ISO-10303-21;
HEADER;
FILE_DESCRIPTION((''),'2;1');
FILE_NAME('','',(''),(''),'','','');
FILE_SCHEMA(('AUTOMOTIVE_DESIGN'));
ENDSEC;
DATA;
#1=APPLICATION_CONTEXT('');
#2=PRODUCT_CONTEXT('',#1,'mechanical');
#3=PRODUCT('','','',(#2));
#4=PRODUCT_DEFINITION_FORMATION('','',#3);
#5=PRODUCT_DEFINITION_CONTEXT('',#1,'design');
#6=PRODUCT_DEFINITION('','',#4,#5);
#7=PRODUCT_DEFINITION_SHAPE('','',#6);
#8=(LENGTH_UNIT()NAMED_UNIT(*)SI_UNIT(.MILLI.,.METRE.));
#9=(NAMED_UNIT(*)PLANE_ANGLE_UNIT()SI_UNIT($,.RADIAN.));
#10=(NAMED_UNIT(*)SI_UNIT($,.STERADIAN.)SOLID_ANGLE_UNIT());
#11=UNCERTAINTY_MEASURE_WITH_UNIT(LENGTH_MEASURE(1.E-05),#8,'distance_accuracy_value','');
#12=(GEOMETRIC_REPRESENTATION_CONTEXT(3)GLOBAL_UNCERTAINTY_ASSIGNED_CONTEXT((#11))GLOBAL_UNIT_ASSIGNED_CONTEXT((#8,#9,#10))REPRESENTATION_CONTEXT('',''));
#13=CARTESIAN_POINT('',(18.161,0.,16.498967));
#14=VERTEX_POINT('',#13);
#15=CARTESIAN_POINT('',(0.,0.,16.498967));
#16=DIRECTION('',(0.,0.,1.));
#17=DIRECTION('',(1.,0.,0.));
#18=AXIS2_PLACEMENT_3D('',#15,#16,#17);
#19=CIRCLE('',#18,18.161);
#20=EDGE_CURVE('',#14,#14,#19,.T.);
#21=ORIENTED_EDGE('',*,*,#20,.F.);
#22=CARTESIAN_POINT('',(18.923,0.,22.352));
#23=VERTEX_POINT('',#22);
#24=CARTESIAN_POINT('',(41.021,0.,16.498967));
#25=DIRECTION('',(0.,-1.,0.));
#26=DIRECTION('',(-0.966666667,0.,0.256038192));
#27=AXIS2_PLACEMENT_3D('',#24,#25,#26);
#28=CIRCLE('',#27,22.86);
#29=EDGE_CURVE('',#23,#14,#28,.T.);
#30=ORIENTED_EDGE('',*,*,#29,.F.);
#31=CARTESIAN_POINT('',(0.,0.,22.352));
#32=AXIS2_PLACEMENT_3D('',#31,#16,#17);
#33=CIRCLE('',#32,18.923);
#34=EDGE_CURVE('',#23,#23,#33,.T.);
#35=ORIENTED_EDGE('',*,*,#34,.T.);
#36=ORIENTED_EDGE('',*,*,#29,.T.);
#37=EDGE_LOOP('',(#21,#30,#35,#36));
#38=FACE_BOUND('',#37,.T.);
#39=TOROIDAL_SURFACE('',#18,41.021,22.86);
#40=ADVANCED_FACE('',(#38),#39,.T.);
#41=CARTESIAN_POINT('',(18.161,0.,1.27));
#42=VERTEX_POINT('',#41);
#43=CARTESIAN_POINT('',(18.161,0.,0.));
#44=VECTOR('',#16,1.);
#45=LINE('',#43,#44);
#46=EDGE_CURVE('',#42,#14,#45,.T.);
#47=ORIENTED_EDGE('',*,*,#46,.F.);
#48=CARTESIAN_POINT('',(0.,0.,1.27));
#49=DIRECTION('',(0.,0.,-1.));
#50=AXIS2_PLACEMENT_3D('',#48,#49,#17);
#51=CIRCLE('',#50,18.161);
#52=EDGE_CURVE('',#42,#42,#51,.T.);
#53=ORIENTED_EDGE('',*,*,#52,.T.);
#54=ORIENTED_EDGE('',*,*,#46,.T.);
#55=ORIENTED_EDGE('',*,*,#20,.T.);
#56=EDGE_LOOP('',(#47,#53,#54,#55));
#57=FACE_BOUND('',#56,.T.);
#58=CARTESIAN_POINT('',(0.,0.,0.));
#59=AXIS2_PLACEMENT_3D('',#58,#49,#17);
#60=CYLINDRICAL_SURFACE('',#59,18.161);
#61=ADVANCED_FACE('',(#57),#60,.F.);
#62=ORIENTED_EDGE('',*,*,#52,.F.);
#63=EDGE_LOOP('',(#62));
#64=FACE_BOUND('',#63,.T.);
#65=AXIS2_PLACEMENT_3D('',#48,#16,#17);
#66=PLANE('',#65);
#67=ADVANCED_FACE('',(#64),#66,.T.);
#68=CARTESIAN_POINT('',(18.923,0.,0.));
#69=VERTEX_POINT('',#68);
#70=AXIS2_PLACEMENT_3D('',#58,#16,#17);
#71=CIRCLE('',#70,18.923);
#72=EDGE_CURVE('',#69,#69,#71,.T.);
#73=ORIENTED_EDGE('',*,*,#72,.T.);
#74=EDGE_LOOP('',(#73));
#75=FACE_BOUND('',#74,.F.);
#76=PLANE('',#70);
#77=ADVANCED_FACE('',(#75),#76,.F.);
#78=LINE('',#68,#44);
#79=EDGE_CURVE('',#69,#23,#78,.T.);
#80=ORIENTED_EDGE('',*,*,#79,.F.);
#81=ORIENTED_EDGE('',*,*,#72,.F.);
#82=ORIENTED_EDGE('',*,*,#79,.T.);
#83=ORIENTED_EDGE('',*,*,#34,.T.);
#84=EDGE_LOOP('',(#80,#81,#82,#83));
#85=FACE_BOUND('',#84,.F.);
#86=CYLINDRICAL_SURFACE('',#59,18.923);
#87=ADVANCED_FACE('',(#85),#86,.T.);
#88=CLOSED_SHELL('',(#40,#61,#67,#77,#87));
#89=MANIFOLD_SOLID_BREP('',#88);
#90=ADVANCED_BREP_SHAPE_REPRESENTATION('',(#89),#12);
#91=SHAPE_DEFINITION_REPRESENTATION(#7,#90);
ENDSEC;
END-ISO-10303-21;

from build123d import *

# Parameters (mm, degrees)
F0_R     = 18.923
F0_R_2   = 18.161
F1_DEPTH = 22.352
F2_R     = 18.8764388906
F3_DEPTH = 1.27


# Not quite as in the source:
# - a fillet or chamfer that OpenCascade refuses, or shapes differently, is made with other operations: its cross-section is extruded or revolved along the edge and cut away or added


with BuildPart() as f1:
    # F0 (on Top) → F1 (new body)
    with BuildSketch(Plane.XY):
        Circle(F0_R)
        Circle(F0_R_2, mode=Mode.SUBTRACT)
    extrude(amount=F1_DEPTH)

    # F2 (on Top) → F3 (join)
    with BuildSketch(Plane.XY):
        Circle(F2_R)
    extrude(amount=F3_DEPTH)

    # F4: fillet of radius 22.86 on 1 edges, made by hand

    # F4_s1 → F4_t2 (revolve, cut)
    with BuildSketch(Plane.XZ):
        with BuildLine():
            ThreePointArc((18.923, 22.352), (18.3523004343, 19.4501802499), (18.161, 16.4989669401))
            Line((18.161, 16.4989669401), (18.161, 22.352))
            Line((18.161, 22.352), (18.923, 22.352))
        make_face()
    revolve(axis=Axis((0, 0, 22.352), (0, 0, 1)), mode=Mode.SUBTRACT)


solid = f1.part
